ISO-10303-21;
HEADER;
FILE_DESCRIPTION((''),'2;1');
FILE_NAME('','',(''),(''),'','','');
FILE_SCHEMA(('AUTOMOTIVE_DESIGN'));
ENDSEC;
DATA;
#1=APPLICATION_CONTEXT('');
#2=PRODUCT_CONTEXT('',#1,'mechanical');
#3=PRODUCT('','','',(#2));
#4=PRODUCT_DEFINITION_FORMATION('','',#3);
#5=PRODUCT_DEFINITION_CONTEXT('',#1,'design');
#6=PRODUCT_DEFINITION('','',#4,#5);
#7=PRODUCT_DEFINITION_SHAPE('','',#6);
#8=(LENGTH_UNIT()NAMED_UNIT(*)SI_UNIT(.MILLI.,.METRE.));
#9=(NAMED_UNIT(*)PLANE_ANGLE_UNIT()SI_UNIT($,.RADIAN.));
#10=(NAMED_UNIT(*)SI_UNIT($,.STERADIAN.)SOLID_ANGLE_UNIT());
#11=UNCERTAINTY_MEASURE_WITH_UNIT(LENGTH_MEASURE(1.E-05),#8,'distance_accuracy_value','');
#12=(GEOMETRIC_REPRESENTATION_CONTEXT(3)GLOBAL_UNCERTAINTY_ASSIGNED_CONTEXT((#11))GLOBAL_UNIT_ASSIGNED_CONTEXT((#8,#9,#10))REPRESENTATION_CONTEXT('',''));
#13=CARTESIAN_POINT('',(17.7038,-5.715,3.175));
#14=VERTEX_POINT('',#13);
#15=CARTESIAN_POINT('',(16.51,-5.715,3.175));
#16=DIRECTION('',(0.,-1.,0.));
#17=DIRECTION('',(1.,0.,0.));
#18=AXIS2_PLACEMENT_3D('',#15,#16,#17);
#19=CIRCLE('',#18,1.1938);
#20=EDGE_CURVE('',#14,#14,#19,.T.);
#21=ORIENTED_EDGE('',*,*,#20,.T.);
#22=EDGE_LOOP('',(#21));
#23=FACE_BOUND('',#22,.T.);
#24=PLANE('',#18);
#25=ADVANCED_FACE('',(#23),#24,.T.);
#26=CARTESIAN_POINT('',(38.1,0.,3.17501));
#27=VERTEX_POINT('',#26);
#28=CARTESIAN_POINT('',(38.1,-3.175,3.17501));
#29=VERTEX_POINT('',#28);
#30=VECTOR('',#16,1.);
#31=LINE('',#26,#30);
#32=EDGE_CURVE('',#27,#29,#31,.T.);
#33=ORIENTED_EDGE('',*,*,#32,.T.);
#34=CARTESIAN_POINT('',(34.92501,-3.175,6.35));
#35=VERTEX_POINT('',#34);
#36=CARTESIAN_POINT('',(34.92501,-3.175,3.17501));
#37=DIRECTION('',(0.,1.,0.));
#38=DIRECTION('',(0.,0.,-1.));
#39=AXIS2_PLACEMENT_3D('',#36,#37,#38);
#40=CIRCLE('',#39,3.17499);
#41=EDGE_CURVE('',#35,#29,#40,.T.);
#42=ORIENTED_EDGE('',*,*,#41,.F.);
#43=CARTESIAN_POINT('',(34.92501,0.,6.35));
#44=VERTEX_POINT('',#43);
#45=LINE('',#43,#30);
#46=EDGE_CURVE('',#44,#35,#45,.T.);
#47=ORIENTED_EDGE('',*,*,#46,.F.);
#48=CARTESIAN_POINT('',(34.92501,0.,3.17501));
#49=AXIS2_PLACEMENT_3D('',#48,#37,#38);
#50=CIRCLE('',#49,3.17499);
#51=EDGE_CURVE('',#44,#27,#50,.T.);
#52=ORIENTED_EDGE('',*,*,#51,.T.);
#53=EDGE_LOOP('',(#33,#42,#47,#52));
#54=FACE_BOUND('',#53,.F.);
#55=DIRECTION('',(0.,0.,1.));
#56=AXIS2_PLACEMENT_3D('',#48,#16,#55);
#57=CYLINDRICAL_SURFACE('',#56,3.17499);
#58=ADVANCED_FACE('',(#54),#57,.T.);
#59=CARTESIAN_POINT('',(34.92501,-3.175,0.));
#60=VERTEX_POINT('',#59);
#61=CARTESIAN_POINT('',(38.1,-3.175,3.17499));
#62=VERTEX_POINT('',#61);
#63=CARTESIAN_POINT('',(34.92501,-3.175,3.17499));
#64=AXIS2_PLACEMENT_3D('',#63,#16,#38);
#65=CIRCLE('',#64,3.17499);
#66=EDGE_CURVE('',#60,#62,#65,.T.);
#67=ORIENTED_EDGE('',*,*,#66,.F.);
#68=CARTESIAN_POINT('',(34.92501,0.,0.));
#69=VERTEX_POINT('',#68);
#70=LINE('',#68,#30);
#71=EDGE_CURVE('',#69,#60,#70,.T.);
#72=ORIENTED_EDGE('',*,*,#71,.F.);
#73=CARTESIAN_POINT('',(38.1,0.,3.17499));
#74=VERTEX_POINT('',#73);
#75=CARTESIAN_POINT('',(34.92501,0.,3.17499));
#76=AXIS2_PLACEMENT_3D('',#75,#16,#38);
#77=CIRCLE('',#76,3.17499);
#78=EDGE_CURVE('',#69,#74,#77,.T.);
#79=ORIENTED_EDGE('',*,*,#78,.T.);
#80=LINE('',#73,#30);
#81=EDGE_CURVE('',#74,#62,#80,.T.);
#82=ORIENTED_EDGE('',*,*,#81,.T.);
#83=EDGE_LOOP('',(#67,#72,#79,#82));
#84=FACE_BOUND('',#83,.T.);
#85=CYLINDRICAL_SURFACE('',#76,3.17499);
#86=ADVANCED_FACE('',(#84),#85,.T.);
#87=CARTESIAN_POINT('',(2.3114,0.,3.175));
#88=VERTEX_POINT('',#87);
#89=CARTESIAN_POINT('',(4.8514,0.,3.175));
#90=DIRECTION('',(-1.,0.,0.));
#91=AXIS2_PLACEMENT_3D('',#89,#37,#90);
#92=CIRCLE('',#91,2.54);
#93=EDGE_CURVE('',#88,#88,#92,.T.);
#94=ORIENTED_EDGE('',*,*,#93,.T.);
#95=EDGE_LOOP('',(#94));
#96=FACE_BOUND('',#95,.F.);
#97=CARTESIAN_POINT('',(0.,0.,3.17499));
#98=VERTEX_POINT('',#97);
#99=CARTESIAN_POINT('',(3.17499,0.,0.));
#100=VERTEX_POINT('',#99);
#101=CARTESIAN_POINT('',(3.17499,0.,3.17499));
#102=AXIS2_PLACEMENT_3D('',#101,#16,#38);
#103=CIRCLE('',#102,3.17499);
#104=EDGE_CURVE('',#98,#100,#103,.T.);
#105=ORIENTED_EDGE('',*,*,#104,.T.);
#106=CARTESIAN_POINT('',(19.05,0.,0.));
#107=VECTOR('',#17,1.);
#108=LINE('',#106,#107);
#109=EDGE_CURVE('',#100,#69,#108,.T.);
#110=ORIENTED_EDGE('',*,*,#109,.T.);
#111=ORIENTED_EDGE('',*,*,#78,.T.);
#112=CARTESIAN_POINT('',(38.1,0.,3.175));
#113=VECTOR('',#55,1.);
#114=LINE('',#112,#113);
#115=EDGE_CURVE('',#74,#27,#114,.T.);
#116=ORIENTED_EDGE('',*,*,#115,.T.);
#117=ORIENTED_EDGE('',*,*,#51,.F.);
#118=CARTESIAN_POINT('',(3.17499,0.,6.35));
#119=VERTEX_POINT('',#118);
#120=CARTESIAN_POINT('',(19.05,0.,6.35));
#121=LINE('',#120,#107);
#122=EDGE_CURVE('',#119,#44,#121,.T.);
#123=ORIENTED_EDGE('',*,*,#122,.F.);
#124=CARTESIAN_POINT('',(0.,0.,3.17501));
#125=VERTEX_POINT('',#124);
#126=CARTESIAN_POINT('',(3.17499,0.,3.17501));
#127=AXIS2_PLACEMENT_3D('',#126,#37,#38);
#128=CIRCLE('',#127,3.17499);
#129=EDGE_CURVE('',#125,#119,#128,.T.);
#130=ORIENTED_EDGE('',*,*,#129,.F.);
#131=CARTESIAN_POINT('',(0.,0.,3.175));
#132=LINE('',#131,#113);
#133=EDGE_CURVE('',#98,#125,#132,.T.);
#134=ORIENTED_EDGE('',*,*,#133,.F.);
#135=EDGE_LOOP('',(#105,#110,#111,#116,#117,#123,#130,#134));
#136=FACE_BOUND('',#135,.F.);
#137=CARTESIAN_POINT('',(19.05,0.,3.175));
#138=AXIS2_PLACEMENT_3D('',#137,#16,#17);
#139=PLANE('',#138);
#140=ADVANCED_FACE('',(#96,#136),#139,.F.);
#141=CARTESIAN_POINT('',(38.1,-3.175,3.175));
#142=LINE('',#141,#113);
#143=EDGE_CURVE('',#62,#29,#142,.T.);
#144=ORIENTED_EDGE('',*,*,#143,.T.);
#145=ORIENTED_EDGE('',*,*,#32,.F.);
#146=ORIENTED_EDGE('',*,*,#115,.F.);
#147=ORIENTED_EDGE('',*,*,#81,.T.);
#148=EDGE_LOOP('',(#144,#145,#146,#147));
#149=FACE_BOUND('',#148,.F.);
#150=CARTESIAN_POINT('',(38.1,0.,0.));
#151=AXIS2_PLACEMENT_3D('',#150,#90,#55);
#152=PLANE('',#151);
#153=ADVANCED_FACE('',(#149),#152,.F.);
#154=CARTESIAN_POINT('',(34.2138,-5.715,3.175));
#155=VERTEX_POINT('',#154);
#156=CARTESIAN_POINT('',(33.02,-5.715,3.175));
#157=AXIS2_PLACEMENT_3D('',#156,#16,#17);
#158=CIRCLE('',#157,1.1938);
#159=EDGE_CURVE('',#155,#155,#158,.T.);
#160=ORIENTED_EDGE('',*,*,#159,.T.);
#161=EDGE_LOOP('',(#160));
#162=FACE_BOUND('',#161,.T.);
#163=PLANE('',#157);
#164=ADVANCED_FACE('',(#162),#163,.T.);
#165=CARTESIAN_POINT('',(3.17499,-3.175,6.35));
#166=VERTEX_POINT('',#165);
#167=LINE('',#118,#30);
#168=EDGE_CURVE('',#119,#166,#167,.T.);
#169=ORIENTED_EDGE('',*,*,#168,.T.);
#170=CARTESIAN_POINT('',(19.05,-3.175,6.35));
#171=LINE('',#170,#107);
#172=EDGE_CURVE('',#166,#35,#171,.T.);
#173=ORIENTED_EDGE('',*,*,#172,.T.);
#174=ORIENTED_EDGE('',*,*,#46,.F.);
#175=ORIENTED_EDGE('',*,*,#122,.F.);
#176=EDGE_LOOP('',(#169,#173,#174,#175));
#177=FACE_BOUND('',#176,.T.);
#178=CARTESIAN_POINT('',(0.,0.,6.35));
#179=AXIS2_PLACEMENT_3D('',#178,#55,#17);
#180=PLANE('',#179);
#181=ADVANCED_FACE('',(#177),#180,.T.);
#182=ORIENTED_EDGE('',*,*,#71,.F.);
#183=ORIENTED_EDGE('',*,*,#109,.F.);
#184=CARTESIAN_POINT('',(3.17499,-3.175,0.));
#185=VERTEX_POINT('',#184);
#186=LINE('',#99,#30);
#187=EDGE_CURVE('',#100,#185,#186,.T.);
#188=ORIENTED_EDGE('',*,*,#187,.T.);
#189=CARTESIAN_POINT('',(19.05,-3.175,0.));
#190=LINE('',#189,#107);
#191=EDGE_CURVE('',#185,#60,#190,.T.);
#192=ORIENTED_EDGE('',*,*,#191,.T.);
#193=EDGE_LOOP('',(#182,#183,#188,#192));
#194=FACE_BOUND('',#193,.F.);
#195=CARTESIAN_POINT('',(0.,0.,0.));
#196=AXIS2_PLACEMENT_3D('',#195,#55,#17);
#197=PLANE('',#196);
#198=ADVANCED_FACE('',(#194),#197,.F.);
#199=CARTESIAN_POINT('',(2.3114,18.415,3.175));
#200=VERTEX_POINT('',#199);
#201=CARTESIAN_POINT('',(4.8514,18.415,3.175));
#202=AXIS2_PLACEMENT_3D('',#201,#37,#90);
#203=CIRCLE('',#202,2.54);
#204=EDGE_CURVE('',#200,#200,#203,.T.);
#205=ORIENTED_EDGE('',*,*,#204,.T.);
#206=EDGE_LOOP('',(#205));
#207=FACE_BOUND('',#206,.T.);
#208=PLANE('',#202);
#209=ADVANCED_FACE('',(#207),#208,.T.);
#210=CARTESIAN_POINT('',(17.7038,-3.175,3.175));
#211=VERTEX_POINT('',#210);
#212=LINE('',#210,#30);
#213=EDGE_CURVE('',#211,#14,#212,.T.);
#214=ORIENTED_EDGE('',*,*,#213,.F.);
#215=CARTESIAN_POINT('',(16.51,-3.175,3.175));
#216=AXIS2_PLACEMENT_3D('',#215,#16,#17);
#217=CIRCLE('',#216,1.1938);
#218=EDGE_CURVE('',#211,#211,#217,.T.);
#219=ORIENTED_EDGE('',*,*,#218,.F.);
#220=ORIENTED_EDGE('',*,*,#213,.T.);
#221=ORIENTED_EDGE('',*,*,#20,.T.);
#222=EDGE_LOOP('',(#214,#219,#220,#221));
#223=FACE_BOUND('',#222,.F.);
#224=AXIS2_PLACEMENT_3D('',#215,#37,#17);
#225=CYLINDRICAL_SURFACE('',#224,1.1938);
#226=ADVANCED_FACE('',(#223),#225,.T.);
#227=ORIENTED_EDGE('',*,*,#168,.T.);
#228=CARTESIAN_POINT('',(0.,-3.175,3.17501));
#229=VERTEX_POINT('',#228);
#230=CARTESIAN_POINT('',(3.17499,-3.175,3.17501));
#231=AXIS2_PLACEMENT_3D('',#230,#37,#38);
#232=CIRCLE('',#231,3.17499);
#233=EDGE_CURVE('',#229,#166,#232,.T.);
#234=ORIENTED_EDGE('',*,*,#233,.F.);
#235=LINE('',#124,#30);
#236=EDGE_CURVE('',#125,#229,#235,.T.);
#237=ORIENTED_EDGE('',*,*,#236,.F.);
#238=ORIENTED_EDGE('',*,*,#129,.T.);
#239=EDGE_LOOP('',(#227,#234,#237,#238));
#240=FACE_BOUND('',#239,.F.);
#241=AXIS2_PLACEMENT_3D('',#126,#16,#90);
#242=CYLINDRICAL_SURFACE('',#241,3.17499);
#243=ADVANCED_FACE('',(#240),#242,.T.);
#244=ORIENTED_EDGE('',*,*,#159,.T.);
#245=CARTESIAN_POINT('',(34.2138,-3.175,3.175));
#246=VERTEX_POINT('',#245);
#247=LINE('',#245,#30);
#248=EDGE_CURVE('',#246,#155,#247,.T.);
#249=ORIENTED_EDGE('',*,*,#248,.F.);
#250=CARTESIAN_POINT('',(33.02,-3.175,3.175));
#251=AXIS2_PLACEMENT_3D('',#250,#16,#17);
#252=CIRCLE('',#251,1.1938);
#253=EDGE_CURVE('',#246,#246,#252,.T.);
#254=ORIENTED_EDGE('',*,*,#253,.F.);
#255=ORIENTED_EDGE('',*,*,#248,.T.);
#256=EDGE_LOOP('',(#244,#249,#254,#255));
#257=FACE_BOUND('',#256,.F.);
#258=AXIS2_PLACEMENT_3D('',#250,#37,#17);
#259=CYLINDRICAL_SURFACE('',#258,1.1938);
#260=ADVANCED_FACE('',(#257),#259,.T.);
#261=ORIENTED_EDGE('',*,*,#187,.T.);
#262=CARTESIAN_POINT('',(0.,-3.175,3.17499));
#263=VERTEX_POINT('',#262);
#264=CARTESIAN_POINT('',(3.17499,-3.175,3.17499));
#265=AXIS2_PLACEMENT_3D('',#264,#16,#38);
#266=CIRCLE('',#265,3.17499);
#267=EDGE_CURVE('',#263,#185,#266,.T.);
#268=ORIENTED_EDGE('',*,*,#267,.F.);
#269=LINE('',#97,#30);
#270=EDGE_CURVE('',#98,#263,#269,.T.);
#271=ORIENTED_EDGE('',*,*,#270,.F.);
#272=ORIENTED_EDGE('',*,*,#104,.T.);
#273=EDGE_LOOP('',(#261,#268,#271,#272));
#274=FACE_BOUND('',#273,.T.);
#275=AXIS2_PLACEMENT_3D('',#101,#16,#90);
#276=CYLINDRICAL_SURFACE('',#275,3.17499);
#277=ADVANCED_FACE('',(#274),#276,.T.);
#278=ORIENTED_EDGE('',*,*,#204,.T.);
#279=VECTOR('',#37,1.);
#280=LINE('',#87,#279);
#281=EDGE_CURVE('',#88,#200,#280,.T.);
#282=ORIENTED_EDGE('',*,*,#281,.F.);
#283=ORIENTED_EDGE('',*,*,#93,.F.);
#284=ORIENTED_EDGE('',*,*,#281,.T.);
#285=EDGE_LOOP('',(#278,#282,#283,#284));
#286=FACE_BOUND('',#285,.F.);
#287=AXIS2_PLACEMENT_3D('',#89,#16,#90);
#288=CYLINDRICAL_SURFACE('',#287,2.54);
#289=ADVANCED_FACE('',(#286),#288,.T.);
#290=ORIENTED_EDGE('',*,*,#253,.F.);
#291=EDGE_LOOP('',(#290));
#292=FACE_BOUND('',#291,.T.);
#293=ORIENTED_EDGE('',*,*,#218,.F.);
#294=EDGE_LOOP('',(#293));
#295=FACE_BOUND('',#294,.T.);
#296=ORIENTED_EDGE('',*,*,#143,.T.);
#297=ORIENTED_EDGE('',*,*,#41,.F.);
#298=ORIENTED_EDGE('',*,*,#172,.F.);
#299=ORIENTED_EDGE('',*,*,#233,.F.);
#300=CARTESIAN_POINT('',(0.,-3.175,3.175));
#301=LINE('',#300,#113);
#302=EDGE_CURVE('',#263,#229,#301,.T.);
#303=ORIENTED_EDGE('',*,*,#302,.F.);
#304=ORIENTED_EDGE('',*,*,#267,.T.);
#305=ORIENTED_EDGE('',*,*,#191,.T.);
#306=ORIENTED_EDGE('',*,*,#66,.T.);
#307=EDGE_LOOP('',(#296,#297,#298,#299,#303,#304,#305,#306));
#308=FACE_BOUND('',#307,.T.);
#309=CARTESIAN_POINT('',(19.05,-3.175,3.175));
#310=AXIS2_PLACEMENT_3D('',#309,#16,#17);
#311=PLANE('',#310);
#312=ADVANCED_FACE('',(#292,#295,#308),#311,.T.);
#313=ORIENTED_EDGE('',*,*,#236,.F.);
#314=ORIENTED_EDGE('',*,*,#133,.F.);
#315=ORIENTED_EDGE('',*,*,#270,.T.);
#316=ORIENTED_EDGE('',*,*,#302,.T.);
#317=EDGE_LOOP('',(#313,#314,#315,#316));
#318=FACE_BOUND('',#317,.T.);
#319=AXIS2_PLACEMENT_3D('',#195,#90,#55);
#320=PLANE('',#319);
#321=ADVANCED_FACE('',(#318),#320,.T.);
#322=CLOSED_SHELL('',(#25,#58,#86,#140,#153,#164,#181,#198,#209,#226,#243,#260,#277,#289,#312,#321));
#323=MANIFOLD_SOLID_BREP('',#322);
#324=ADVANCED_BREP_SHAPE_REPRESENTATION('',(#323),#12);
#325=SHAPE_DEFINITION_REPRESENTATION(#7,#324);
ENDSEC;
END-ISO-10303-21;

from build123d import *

# Parameters (mm, degrees)
F0_W     = 38.1
F0_H     = 6.35
F1_DEPTH = 3.175
F2_R     = 1.1938
F3_DEPTH = 2.54
F4_R     = 2.54
F5_DEPTH = 18.415
F6_R     = 3.17499


# Not quite as in the source:
# - a fillet or chamfer is up to 0.001 mm smaller than in the source, because OpenCascade refuses the exact size


with BuildPart() as f1:
    # F0 (on Front) → F1 (new body)
    with BuildSketch(Plane.XZ):
        with Locations((19.05, 3.175)):
            Rectangle(F0_W, F0_H)
    extrude(amount=F1_DEPTH)

    # F2 (on face) → F3 (join)
    with BuildSketch(Plane.XZ.offset(3.175)):
        with Locations((16.51, 3.175)):
            Circle(F2_R)
        with Locations((33.02, 3.175)):
            Circle(F2_R)
    extrude(amount=F3_DEPTH)

    # F4 (on face) → F5 (join)
    with BuildSketch(Plane(origin=(0, 0, 0), x_dir=(-1, 0, 0), z_dir=(0, 1, 0))):
        with Locations((-4.8514, 3.175)):
            Circle(F4_R)
    extrude(amount=F5_DEPTH)

    # F6 (radius 3.175 in the source; OpenCascade refuses exactly that, so slightly less here)
    f6_edges = [f1.edges().sort_by_distance(p)[0] for p in [
        (38.1, -1.5875, 6.35),
        (38.1, -1.5875, 0),
        (0, -1.5875, 6.35),
        (0, -1.5875, 0),
    ]]
    fillet(f6_edges, radius=F6_R)


solid = f1.part
